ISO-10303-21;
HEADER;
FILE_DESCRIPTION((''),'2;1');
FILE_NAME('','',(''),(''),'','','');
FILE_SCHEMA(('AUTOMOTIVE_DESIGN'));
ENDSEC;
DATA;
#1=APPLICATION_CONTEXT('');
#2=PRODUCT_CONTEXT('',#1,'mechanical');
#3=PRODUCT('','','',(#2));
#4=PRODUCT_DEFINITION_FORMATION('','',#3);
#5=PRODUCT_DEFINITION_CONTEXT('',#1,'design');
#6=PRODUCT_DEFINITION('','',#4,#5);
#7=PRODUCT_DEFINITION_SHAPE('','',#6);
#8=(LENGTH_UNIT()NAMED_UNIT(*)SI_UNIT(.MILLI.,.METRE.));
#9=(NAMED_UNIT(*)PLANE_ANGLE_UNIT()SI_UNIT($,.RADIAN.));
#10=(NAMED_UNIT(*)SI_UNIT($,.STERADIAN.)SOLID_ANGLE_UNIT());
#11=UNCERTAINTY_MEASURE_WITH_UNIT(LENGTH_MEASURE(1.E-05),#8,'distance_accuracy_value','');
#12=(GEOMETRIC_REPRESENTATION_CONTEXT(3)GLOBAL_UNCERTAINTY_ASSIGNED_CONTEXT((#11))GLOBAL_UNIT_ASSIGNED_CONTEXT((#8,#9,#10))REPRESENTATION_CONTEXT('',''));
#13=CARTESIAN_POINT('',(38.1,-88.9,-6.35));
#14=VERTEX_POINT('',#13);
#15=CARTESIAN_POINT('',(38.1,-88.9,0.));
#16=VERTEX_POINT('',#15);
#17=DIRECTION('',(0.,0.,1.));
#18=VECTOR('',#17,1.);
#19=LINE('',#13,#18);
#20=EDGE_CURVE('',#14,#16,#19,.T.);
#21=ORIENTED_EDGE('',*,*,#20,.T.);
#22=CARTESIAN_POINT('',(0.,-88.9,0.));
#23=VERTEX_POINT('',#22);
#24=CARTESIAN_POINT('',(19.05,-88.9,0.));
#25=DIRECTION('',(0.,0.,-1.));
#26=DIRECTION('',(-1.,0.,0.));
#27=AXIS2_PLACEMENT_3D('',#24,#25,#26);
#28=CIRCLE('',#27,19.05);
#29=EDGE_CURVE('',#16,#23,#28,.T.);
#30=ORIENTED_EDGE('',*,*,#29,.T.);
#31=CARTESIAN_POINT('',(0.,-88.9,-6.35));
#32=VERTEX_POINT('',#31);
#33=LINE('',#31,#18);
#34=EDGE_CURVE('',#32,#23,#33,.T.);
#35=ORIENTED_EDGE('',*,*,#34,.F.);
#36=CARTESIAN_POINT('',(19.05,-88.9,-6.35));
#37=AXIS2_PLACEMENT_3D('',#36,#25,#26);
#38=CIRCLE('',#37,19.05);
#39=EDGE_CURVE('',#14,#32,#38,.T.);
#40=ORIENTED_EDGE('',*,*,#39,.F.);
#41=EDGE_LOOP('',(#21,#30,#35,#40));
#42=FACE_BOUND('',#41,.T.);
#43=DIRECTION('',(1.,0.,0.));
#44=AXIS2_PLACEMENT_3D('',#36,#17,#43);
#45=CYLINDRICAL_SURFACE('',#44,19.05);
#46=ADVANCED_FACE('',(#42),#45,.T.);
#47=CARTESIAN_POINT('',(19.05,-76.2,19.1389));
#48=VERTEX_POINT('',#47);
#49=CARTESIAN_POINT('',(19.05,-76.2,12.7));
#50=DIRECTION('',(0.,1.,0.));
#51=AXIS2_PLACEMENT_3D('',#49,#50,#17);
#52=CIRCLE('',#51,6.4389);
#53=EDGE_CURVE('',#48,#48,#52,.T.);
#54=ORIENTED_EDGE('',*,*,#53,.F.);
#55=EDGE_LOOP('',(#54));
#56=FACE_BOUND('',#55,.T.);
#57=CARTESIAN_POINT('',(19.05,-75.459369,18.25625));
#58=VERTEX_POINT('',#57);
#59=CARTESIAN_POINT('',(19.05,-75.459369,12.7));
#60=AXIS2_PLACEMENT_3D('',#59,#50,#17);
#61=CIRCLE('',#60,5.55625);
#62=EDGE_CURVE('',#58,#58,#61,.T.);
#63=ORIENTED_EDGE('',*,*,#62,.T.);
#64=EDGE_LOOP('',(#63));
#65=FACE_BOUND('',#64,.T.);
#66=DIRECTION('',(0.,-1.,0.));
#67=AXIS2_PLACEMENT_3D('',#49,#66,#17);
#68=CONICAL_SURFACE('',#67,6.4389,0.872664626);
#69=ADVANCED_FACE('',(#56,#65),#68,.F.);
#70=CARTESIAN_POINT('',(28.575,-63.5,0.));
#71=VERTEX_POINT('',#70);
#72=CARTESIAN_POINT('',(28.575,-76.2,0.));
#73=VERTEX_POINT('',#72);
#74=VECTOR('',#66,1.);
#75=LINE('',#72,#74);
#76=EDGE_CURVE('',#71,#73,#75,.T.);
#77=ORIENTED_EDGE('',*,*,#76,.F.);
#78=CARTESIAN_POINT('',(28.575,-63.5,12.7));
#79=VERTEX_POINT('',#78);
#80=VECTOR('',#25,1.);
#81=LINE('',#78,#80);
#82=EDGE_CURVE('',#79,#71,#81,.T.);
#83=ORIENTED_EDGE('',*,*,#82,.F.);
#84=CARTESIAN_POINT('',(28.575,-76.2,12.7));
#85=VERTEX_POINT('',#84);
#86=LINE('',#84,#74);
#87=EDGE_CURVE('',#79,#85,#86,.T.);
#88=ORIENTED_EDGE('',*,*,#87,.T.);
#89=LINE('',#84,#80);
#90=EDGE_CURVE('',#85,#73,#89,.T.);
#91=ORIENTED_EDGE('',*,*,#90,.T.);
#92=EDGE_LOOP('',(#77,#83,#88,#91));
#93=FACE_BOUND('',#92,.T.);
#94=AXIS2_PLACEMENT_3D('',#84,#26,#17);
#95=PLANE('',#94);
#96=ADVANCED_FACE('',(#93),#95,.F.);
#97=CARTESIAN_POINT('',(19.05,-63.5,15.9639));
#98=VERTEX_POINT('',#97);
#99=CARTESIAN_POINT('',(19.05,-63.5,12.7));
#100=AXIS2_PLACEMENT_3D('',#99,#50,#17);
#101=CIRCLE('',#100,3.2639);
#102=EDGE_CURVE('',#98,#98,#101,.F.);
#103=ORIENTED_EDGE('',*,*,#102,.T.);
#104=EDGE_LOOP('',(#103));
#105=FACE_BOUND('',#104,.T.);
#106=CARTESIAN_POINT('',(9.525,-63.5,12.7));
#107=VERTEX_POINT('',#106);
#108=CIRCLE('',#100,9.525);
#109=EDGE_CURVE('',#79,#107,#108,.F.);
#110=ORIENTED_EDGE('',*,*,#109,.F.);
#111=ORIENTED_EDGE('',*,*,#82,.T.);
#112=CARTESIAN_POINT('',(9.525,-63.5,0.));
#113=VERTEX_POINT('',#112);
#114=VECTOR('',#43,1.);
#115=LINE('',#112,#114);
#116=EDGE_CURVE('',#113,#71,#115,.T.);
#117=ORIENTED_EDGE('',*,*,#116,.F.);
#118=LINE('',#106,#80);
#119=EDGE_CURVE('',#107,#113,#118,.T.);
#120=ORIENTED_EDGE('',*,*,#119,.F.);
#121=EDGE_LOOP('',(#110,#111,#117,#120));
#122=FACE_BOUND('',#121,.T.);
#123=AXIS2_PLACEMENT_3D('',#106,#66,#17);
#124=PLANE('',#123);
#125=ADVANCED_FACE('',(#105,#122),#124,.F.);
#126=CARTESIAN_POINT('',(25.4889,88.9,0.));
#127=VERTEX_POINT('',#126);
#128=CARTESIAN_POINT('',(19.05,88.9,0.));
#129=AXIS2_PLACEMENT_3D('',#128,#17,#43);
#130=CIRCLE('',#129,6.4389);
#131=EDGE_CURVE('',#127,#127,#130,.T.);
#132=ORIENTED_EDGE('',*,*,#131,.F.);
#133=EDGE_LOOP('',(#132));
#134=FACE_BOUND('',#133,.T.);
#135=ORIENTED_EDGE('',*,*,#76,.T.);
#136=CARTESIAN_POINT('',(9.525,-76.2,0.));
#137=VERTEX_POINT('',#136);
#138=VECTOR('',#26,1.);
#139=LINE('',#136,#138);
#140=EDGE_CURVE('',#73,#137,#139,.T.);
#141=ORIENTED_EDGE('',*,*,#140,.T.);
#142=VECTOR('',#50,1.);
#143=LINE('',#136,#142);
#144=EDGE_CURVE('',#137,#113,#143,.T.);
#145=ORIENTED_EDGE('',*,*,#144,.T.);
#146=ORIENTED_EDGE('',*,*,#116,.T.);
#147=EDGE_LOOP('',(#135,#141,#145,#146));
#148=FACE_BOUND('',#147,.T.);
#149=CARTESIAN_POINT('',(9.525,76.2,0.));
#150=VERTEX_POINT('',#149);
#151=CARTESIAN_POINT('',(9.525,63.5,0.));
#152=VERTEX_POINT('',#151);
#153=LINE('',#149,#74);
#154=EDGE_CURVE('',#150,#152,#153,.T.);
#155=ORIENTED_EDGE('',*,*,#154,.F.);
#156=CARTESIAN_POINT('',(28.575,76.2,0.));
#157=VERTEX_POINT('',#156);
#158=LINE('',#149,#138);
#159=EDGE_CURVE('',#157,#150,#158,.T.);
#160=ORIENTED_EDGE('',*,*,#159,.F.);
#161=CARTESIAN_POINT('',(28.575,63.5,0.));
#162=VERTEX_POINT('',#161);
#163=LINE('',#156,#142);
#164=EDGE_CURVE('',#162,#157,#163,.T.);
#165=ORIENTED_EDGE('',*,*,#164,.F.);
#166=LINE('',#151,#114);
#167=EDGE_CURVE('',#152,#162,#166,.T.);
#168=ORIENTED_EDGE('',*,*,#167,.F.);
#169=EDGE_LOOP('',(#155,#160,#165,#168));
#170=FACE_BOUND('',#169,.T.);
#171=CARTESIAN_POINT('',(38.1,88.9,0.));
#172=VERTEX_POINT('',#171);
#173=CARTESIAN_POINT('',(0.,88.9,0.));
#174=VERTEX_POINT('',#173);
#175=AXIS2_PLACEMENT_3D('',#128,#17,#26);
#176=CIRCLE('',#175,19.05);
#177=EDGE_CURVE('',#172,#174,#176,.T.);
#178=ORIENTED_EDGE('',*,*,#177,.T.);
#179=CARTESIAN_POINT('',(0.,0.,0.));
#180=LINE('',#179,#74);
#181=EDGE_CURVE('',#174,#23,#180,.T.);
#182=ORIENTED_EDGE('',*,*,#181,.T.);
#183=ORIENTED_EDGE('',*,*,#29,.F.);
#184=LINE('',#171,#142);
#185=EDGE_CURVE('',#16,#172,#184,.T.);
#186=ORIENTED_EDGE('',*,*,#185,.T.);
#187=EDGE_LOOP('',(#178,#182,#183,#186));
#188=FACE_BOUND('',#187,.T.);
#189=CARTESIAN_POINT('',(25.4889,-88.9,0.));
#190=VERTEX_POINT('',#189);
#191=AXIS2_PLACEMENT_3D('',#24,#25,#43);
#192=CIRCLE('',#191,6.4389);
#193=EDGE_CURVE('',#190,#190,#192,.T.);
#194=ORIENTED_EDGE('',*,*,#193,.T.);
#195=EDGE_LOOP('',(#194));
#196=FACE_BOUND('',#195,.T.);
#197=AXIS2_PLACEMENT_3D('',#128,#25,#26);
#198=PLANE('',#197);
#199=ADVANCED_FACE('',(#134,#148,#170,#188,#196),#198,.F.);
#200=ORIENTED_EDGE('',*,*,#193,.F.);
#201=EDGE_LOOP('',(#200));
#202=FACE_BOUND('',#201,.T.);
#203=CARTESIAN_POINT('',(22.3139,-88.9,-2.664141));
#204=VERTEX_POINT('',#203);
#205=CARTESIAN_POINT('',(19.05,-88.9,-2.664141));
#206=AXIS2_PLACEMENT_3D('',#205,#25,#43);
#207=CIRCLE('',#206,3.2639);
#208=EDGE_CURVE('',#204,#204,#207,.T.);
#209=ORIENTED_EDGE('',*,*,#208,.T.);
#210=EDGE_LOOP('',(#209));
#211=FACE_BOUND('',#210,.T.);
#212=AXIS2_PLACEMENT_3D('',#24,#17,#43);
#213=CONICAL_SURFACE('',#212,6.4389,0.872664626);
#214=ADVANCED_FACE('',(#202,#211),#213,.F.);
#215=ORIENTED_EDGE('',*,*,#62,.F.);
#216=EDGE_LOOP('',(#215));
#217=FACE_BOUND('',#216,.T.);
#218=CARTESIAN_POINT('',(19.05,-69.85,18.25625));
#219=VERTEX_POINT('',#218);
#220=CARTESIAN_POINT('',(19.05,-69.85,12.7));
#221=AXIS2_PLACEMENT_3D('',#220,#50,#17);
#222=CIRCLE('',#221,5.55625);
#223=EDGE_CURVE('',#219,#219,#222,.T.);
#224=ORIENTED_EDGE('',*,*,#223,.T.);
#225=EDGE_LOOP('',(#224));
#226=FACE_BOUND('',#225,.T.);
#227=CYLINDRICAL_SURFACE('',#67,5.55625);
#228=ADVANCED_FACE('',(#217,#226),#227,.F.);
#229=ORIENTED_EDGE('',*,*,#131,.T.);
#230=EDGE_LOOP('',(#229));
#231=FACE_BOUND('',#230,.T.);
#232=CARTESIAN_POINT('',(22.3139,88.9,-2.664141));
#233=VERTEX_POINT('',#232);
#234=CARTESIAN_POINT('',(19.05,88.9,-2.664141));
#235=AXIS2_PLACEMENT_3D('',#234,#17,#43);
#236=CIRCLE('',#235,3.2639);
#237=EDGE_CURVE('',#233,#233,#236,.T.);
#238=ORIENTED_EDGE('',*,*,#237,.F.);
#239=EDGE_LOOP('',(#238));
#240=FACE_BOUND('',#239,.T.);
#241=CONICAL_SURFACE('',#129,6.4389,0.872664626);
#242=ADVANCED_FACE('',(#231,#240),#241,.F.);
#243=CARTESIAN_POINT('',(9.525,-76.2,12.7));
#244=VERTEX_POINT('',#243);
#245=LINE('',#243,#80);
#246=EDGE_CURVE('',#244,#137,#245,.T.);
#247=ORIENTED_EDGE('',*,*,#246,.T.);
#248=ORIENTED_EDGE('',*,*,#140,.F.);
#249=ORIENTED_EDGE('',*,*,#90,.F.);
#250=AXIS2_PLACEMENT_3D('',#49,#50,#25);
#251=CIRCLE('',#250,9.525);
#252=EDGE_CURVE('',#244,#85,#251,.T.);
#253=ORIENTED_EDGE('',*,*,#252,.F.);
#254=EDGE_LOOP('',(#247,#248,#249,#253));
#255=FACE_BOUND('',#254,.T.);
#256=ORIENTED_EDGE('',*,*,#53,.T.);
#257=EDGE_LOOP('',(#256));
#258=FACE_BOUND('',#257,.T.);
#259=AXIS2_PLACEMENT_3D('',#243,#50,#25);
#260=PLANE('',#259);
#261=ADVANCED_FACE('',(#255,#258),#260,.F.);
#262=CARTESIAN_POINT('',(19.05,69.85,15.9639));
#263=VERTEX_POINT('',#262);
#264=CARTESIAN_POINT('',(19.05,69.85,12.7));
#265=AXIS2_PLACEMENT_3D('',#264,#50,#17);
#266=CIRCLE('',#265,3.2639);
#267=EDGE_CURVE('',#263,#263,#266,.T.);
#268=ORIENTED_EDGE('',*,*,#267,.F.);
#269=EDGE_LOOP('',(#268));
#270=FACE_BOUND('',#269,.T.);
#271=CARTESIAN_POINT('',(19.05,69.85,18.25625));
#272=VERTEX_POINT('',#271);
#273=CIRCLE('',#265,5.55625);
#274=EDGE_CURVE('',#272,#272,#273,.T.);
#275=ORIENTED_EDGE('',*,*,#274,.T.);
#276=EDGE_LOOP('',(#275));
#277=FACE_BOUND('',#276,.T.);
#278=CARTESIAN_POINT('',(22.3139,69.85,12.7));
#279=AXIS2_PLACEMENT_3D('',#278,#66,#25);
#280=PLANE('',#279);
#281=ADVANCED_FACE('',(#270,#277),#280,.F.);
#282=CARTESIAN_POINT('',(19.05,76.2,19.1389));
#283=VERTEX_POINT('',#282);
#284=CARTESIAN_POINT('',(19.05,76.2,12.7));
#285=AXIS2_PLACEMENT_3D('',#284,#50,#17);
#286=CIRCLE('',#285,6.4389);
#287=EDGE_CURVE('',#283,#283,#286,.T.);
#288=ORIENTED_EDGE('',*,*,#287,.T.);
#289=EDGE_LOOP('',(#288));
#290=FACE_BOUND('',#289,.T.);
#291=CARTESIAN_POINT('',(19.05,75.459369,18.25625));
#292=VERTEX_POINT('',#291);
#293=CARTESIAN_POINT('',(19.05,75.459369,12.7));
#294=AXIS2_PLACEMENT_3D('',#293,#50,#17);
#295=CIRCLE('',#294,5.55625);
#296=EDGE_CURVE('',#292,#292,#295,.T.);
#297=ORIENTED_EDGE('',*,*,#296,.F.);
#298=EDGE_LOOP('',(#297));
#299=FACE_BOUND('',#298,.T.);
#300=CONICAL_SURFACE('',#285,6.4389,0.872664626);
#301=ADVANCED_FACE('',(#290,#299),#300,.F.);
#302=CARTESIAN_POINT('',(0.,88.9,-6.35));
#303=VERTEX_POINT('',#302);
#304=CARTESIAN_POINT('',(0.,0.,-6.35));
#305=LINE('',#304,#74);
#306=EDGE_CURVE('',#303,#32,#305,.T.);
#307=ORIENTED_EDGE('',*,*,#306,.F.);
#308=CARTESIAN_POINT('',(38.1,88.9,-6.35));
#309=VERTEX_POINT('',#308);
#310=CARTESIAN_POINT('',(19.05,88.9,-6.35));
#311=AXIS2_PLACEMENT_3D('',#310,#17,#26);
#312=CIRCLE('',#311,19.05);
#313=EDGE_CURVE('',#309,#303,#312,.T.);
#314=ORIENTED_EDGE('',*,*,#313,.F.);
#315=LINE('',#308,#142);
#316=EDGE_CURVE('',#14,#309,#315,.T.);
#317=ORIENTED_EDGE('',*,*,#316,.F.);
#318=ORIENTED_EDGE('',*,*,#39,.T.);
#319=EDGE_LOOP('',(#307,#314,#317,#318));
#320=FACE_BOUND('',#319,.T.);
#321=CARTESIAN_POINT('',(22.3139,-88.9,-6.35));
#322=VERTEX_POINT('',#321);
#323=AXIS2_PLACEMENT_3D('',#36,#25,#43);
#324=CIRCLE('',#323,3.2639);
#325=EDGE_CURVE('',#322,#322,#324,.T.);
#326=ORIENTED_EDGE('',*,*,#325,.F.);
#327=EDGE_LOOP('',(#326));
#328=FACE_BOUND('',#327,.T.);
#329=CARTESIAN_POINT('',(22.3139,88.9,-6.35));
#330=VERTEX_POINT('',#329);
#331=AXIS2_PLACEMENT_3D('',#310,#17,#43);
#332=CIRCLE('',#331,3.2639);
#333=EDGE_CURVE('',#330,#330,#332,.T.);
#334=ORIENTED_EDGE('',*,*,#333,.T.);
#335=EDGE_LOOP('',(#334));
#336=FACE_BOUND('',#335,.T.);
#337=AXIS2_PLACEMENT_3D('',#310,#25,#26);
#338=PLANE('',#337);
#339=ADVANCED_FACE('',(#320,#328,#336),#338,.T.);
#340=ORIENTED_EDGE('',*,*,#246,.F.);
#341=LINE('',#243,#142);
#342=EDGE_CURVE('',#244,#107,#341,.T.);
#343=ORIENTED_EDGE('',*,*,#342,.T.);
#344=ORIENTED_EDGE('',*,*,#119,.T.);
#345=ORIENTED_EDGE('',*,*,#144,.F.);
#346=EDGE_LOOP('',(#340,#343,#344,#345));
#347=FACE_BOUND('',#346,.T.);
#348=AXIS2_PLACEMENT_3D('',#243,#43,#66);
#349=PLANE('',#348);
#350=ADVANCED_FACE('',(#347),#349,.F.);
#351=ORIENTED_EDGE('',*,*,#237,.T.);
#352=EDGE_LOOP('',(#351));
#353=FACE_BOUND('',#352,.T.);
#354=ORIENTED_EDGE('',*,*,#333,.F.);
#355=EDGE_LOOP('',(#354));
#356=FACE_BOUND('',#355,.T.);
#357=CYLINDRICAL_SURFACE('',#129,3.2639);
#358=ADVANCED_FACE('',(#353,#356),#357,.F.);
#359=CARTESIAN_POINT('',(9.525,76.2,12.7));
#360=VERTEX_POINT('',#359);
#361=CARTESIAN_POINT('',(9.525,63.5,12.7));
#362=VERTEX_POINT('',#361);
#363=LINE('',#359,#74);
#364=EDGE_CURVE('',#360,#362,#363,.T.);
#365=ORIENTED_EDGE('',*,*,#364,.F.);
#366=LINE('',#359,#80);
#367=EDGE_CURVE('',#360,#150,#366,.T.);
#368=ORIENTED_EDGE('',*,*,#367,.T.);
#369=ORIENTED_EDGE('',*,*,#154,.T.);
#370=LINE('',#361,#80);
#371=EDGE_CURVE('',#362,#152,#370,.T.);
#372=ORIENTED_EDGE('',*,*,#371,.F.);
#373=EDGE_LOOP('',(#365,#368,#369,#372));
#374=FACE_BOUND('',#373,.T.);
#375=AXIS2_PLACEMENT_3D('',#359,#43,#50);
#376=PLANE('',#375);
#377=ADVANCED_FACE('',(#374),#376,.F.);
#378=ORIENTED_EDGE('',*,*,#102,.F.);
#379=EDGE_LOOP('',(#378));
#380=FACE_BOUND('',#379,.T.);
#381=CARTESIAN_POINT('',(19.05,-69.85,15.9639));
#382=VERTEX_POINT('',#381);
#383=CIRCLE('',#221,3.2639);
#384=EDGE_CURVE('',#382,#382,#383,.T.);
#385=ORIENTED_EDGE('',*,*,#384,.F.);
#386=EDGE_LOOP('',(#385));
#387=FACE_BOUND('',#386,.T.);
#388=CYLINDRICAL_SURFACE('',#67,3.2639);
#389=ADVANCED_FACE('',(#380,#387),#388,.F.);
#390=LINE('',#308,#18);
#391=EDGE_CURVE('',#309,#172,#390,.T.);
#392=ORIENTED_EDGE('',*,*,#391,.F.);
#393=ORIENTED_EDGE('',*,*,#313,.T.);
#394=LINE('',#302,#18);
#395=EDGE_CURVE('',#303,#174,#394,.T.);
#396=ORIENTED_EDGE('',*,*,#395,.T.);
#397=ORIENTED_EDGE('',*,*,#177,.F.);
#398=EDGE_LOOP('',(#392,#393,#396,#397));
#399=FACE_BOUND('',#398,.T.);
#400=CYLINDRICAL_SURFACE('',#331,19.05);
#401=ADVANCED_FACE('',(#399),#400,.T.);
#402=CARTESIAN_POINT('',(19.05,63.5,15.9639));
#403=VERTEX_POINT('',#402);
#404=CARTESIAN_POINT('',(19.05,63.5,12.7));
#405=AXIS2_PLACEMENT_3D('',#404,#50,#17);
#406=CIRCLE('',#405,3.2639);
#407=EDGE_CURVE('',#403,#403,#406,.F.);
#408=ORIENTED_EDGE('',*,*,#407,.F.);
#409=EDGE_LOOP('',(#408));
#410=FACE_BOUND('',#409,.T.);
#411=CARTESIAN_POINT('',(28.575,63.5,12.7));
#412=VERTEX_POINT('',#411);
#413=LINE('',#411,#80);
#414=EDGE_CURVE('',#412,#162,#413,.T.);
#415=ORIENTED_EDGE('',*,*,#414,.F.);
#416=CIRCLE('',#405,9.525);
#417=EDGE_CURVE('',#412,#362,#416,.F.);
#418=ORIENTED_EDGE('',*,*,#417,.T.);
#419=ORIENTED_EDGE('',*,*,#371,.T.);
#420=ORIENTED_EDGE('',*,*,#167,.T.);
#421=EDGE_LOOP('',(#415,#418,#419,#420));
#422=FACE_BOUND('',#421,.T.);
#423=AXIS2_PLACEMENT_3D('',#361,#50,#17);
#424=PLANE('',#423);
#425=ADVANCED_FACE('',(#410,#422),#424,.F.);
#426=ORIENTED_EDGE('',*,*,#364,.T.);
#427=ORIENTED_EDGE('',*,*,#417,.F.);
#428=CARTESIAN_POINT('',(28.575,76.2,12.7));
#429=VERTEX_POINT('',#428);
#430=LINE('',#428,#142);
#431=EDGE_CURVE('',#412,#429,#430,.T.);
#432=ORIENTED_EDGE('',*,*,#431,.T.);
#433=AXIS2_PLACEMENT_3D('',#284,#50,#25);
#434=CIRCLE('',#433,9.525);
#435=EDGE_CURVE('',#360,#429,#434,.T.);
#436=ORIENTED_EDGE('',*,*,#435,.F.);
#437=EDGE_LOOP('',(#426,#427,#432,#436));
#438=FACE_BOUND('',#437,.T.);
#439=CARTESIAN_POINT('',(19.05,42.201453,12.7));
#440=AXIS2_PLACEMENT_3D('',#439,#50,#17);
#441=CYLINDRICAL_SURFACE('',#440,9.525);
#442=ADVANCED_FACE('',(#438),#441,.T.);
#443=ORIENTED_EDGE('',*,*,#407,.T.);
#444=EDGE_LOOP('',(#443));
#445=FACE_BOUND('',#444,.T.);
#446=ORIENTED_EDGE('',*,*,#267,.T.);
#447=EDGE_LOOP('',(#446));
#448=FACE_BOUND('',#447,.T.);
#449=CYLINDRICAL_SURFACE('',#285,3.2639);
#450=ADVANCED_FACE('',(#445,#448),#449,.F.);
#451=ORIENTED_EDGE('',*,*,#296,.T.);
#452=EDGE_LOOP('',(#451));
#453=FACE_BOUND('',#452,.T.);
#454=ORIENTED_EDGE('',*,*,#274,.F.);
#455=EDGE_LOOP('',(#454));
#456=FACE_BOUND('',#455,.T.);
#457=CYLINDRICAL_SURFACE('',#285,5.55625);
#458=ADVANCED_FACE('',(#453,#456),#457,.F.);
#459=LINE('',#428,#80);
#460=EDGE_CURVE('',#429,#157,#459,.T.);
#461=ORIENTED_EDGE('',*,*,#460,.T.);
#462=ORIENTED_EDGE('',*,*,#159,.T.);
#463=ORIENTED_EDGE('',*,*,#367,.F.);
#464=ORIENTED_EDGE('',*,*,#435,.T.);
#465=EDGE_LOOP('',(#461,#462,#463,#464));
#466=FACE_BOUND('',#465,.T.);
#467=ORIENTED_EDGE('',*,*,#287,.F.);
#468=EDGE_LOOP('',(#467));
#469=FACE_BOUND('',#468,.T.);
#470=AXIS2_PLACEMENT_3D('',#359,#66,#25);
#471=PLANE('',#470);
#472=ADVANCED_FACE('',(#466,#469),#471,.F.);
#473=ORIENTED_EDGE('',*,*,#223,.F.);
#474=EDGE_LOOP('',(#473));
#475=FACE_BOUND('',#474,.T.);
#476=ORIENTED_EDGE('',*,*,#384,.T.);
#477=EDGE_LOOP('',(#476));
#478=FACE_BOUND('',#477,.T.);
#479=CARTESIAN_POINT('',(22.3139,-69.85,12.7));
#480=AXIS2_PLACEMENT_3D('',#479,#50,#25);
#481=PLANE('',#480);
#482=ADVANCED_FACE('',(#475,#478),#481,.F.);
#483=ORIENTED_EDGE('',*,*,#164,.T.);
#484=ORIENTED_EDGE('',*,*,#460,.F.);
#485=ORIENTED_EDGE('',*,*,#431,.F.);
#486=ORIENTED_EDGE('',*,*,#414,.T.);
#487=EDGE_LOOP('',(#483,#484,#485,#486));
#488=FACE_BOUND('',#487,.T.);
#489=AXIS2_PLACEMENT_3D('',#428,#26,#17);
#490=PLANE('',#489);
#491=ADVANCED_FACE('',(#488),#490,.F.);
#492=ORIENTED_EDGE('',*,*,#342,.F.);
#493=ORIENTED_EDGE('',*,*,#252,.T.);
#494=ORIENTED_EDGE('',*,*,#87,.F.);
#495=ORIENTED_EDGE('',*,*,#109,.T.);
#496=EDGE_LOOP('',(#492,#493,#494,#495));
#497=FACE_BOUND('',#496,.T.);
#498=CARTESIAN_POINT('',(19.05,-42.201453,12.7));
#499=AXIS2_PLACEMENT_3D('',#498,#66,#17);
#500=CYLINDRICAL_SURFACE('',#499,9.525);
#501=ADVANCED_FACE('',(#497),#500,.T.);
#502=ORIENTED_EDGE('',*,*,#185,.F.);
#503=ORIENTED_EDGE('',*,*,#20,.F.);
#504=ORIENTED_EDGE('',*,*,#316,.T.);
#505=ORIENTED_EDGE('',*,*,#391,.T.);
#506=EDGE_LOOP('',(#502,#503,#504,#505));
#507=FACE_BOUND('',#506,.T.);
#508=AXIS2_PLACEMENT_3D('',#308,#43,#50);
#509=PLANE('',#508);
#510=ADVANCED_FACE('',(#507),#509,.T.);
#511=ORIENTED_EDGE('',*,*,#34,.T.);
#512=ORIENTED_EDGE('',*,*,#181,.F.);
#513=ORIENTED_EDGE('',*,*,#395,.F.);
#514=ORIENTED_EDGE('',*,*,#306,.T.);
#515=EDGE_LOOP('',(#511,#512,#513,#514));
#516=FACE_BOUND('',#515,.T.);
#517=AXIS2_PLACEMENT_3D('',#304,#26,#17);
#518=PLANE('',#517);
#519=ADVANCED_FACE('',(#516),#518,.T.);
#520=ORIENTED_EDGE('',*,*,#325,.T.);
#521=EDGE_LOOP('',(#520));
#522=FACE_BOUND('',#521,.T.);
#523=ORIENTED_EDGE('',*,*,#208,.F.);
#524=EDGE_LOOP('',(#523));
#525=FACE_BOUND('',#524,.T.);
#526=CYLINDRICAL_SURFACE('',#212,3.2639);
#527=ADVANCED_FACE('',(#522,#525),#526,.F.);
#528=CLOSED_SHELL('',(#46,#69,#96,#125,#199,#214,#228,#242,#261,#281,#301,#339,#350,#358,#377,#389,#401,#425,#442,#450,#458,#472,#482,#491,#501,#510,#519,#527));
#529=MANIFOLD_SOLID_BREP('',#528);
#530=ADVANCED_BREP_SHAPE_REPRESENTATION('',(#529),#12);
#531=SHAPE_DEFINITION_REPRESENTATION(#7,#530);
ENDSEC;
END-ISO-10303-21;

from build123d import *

# Parameters (mm, degrees)
BOSS_EXTRUDE1_DEPTH                                 = 6.35
CSK_FOR_1_4_FLAT_HEAD_MACHINE_SCREW_100_D           = 6.5278
CSK_FOR_1_4_FLAT_HEAD_MACHINE_SCREW_100_CSINK_D     = 12.8778
CSK_FOR_1_4_FLAT_HEAD_MACHINE_SCREW_100_CSINK_ANGLE = 100
SKETCH5_W                                           = 19.05
SKETCH5_H                                           = 12.7
BOSS_EXTRUDE2_DEPTH                                 = 12.7
BOSS_EXTRUDE3_DEPTH                                 = 12.7


# Read off the part's stored shape, not the designer's step: CBORE for 1/4 Socket Head Cap Screw1
with BuildPart() as part:
    # Sketch1 → Boss-Extrude1 (new body)
    with BuildSketch(Plane.XY):
        with BuildLine():
            Line((0, 0), (0, 88.9))
            ThreePointArc((0, 88.9), (19.05, 107.95), (38.1, 88.9))
            Line((38.1, 88.9), (38.1, 0))
            Line((38.1, 0), (0, 0))
        make_face()
    extrude(amount=-BOSS_EXTRUDE1_DEPTH)

    # CSK for 1/4 Flat Head Machine Screw (100)1 (through all)
    with Locations(Plane.XY):
        with Locations((19.05, 88.9)):
            CounterSinkHole(CSK_FOR_1_4_FLAT_HEAD_MACHINE_SCREW_100_D / 2, CSK_FOR_1_4_FLAT_HEAD_MACHINE_SCREW_100_CSINK_D / 2, counter_sink_angle=CSK_FOR_1_4_FLAT_HEAD_MACHINE_SCREW_100_CSINK_ANGLE)

    # Sketch5 → Boss-Extrude2 (add)
    with BuildSketch(Plane.XY):
        with Locations((19.05, 69.85)):
            Rectangle(SKETCH5_W, SKETCH5_H)
    extrude(amount=BOSS_EXTRUDE2_DEPTH)

    # Sketch6 → Boss-Extrude3 (add)
    with BuildSketch(Plane(origin=(0, 76.2, 0), x_dir=(1, 0, 0), z_dir=(0, 1, 0))):
        with BuildLine():
            Line((9.525, -12.7), (28.575, -12.7))
            ThreePointArc((28.575, -12.7), (19.05, -22.225), (9.525, -12.7))
        make_face()
    extrude(amount=-BOSS_EXTRUDE3_DEPTH)

    # CBORE for 1/4 Socket Head Cap Screw1 out → CBORE for 1/4 Socket Head Cap Screw1 (revolve, cut)
    with BuildSketch(Plane(origin=(19.05, 0, 12.7), x_dir=(1, 0, 0), z_dir=(0, 0, 1))):
        Polygon((0, 63.5), (3.2639, 63.5), (3.2639, 69.85), (5.55625, 69.85), (5.55625, 75.459368711), (6.4389, 76.2), (0, 76.2), align=None)
    revolve(axis=Axis((19.05, 0, 12.7), (0, 1, 0)), mode=Mode.SUBTRACT)

    # Mirror1: part across plane


with BuildPart() as part_1:
    add(part.part)
    add(part.part.mirror(Plane(origin=(38.1, 0, -6.35), x_dir=(0, 0, 1), z_dir=(0, -1, 0))))


solid = part_1.part
